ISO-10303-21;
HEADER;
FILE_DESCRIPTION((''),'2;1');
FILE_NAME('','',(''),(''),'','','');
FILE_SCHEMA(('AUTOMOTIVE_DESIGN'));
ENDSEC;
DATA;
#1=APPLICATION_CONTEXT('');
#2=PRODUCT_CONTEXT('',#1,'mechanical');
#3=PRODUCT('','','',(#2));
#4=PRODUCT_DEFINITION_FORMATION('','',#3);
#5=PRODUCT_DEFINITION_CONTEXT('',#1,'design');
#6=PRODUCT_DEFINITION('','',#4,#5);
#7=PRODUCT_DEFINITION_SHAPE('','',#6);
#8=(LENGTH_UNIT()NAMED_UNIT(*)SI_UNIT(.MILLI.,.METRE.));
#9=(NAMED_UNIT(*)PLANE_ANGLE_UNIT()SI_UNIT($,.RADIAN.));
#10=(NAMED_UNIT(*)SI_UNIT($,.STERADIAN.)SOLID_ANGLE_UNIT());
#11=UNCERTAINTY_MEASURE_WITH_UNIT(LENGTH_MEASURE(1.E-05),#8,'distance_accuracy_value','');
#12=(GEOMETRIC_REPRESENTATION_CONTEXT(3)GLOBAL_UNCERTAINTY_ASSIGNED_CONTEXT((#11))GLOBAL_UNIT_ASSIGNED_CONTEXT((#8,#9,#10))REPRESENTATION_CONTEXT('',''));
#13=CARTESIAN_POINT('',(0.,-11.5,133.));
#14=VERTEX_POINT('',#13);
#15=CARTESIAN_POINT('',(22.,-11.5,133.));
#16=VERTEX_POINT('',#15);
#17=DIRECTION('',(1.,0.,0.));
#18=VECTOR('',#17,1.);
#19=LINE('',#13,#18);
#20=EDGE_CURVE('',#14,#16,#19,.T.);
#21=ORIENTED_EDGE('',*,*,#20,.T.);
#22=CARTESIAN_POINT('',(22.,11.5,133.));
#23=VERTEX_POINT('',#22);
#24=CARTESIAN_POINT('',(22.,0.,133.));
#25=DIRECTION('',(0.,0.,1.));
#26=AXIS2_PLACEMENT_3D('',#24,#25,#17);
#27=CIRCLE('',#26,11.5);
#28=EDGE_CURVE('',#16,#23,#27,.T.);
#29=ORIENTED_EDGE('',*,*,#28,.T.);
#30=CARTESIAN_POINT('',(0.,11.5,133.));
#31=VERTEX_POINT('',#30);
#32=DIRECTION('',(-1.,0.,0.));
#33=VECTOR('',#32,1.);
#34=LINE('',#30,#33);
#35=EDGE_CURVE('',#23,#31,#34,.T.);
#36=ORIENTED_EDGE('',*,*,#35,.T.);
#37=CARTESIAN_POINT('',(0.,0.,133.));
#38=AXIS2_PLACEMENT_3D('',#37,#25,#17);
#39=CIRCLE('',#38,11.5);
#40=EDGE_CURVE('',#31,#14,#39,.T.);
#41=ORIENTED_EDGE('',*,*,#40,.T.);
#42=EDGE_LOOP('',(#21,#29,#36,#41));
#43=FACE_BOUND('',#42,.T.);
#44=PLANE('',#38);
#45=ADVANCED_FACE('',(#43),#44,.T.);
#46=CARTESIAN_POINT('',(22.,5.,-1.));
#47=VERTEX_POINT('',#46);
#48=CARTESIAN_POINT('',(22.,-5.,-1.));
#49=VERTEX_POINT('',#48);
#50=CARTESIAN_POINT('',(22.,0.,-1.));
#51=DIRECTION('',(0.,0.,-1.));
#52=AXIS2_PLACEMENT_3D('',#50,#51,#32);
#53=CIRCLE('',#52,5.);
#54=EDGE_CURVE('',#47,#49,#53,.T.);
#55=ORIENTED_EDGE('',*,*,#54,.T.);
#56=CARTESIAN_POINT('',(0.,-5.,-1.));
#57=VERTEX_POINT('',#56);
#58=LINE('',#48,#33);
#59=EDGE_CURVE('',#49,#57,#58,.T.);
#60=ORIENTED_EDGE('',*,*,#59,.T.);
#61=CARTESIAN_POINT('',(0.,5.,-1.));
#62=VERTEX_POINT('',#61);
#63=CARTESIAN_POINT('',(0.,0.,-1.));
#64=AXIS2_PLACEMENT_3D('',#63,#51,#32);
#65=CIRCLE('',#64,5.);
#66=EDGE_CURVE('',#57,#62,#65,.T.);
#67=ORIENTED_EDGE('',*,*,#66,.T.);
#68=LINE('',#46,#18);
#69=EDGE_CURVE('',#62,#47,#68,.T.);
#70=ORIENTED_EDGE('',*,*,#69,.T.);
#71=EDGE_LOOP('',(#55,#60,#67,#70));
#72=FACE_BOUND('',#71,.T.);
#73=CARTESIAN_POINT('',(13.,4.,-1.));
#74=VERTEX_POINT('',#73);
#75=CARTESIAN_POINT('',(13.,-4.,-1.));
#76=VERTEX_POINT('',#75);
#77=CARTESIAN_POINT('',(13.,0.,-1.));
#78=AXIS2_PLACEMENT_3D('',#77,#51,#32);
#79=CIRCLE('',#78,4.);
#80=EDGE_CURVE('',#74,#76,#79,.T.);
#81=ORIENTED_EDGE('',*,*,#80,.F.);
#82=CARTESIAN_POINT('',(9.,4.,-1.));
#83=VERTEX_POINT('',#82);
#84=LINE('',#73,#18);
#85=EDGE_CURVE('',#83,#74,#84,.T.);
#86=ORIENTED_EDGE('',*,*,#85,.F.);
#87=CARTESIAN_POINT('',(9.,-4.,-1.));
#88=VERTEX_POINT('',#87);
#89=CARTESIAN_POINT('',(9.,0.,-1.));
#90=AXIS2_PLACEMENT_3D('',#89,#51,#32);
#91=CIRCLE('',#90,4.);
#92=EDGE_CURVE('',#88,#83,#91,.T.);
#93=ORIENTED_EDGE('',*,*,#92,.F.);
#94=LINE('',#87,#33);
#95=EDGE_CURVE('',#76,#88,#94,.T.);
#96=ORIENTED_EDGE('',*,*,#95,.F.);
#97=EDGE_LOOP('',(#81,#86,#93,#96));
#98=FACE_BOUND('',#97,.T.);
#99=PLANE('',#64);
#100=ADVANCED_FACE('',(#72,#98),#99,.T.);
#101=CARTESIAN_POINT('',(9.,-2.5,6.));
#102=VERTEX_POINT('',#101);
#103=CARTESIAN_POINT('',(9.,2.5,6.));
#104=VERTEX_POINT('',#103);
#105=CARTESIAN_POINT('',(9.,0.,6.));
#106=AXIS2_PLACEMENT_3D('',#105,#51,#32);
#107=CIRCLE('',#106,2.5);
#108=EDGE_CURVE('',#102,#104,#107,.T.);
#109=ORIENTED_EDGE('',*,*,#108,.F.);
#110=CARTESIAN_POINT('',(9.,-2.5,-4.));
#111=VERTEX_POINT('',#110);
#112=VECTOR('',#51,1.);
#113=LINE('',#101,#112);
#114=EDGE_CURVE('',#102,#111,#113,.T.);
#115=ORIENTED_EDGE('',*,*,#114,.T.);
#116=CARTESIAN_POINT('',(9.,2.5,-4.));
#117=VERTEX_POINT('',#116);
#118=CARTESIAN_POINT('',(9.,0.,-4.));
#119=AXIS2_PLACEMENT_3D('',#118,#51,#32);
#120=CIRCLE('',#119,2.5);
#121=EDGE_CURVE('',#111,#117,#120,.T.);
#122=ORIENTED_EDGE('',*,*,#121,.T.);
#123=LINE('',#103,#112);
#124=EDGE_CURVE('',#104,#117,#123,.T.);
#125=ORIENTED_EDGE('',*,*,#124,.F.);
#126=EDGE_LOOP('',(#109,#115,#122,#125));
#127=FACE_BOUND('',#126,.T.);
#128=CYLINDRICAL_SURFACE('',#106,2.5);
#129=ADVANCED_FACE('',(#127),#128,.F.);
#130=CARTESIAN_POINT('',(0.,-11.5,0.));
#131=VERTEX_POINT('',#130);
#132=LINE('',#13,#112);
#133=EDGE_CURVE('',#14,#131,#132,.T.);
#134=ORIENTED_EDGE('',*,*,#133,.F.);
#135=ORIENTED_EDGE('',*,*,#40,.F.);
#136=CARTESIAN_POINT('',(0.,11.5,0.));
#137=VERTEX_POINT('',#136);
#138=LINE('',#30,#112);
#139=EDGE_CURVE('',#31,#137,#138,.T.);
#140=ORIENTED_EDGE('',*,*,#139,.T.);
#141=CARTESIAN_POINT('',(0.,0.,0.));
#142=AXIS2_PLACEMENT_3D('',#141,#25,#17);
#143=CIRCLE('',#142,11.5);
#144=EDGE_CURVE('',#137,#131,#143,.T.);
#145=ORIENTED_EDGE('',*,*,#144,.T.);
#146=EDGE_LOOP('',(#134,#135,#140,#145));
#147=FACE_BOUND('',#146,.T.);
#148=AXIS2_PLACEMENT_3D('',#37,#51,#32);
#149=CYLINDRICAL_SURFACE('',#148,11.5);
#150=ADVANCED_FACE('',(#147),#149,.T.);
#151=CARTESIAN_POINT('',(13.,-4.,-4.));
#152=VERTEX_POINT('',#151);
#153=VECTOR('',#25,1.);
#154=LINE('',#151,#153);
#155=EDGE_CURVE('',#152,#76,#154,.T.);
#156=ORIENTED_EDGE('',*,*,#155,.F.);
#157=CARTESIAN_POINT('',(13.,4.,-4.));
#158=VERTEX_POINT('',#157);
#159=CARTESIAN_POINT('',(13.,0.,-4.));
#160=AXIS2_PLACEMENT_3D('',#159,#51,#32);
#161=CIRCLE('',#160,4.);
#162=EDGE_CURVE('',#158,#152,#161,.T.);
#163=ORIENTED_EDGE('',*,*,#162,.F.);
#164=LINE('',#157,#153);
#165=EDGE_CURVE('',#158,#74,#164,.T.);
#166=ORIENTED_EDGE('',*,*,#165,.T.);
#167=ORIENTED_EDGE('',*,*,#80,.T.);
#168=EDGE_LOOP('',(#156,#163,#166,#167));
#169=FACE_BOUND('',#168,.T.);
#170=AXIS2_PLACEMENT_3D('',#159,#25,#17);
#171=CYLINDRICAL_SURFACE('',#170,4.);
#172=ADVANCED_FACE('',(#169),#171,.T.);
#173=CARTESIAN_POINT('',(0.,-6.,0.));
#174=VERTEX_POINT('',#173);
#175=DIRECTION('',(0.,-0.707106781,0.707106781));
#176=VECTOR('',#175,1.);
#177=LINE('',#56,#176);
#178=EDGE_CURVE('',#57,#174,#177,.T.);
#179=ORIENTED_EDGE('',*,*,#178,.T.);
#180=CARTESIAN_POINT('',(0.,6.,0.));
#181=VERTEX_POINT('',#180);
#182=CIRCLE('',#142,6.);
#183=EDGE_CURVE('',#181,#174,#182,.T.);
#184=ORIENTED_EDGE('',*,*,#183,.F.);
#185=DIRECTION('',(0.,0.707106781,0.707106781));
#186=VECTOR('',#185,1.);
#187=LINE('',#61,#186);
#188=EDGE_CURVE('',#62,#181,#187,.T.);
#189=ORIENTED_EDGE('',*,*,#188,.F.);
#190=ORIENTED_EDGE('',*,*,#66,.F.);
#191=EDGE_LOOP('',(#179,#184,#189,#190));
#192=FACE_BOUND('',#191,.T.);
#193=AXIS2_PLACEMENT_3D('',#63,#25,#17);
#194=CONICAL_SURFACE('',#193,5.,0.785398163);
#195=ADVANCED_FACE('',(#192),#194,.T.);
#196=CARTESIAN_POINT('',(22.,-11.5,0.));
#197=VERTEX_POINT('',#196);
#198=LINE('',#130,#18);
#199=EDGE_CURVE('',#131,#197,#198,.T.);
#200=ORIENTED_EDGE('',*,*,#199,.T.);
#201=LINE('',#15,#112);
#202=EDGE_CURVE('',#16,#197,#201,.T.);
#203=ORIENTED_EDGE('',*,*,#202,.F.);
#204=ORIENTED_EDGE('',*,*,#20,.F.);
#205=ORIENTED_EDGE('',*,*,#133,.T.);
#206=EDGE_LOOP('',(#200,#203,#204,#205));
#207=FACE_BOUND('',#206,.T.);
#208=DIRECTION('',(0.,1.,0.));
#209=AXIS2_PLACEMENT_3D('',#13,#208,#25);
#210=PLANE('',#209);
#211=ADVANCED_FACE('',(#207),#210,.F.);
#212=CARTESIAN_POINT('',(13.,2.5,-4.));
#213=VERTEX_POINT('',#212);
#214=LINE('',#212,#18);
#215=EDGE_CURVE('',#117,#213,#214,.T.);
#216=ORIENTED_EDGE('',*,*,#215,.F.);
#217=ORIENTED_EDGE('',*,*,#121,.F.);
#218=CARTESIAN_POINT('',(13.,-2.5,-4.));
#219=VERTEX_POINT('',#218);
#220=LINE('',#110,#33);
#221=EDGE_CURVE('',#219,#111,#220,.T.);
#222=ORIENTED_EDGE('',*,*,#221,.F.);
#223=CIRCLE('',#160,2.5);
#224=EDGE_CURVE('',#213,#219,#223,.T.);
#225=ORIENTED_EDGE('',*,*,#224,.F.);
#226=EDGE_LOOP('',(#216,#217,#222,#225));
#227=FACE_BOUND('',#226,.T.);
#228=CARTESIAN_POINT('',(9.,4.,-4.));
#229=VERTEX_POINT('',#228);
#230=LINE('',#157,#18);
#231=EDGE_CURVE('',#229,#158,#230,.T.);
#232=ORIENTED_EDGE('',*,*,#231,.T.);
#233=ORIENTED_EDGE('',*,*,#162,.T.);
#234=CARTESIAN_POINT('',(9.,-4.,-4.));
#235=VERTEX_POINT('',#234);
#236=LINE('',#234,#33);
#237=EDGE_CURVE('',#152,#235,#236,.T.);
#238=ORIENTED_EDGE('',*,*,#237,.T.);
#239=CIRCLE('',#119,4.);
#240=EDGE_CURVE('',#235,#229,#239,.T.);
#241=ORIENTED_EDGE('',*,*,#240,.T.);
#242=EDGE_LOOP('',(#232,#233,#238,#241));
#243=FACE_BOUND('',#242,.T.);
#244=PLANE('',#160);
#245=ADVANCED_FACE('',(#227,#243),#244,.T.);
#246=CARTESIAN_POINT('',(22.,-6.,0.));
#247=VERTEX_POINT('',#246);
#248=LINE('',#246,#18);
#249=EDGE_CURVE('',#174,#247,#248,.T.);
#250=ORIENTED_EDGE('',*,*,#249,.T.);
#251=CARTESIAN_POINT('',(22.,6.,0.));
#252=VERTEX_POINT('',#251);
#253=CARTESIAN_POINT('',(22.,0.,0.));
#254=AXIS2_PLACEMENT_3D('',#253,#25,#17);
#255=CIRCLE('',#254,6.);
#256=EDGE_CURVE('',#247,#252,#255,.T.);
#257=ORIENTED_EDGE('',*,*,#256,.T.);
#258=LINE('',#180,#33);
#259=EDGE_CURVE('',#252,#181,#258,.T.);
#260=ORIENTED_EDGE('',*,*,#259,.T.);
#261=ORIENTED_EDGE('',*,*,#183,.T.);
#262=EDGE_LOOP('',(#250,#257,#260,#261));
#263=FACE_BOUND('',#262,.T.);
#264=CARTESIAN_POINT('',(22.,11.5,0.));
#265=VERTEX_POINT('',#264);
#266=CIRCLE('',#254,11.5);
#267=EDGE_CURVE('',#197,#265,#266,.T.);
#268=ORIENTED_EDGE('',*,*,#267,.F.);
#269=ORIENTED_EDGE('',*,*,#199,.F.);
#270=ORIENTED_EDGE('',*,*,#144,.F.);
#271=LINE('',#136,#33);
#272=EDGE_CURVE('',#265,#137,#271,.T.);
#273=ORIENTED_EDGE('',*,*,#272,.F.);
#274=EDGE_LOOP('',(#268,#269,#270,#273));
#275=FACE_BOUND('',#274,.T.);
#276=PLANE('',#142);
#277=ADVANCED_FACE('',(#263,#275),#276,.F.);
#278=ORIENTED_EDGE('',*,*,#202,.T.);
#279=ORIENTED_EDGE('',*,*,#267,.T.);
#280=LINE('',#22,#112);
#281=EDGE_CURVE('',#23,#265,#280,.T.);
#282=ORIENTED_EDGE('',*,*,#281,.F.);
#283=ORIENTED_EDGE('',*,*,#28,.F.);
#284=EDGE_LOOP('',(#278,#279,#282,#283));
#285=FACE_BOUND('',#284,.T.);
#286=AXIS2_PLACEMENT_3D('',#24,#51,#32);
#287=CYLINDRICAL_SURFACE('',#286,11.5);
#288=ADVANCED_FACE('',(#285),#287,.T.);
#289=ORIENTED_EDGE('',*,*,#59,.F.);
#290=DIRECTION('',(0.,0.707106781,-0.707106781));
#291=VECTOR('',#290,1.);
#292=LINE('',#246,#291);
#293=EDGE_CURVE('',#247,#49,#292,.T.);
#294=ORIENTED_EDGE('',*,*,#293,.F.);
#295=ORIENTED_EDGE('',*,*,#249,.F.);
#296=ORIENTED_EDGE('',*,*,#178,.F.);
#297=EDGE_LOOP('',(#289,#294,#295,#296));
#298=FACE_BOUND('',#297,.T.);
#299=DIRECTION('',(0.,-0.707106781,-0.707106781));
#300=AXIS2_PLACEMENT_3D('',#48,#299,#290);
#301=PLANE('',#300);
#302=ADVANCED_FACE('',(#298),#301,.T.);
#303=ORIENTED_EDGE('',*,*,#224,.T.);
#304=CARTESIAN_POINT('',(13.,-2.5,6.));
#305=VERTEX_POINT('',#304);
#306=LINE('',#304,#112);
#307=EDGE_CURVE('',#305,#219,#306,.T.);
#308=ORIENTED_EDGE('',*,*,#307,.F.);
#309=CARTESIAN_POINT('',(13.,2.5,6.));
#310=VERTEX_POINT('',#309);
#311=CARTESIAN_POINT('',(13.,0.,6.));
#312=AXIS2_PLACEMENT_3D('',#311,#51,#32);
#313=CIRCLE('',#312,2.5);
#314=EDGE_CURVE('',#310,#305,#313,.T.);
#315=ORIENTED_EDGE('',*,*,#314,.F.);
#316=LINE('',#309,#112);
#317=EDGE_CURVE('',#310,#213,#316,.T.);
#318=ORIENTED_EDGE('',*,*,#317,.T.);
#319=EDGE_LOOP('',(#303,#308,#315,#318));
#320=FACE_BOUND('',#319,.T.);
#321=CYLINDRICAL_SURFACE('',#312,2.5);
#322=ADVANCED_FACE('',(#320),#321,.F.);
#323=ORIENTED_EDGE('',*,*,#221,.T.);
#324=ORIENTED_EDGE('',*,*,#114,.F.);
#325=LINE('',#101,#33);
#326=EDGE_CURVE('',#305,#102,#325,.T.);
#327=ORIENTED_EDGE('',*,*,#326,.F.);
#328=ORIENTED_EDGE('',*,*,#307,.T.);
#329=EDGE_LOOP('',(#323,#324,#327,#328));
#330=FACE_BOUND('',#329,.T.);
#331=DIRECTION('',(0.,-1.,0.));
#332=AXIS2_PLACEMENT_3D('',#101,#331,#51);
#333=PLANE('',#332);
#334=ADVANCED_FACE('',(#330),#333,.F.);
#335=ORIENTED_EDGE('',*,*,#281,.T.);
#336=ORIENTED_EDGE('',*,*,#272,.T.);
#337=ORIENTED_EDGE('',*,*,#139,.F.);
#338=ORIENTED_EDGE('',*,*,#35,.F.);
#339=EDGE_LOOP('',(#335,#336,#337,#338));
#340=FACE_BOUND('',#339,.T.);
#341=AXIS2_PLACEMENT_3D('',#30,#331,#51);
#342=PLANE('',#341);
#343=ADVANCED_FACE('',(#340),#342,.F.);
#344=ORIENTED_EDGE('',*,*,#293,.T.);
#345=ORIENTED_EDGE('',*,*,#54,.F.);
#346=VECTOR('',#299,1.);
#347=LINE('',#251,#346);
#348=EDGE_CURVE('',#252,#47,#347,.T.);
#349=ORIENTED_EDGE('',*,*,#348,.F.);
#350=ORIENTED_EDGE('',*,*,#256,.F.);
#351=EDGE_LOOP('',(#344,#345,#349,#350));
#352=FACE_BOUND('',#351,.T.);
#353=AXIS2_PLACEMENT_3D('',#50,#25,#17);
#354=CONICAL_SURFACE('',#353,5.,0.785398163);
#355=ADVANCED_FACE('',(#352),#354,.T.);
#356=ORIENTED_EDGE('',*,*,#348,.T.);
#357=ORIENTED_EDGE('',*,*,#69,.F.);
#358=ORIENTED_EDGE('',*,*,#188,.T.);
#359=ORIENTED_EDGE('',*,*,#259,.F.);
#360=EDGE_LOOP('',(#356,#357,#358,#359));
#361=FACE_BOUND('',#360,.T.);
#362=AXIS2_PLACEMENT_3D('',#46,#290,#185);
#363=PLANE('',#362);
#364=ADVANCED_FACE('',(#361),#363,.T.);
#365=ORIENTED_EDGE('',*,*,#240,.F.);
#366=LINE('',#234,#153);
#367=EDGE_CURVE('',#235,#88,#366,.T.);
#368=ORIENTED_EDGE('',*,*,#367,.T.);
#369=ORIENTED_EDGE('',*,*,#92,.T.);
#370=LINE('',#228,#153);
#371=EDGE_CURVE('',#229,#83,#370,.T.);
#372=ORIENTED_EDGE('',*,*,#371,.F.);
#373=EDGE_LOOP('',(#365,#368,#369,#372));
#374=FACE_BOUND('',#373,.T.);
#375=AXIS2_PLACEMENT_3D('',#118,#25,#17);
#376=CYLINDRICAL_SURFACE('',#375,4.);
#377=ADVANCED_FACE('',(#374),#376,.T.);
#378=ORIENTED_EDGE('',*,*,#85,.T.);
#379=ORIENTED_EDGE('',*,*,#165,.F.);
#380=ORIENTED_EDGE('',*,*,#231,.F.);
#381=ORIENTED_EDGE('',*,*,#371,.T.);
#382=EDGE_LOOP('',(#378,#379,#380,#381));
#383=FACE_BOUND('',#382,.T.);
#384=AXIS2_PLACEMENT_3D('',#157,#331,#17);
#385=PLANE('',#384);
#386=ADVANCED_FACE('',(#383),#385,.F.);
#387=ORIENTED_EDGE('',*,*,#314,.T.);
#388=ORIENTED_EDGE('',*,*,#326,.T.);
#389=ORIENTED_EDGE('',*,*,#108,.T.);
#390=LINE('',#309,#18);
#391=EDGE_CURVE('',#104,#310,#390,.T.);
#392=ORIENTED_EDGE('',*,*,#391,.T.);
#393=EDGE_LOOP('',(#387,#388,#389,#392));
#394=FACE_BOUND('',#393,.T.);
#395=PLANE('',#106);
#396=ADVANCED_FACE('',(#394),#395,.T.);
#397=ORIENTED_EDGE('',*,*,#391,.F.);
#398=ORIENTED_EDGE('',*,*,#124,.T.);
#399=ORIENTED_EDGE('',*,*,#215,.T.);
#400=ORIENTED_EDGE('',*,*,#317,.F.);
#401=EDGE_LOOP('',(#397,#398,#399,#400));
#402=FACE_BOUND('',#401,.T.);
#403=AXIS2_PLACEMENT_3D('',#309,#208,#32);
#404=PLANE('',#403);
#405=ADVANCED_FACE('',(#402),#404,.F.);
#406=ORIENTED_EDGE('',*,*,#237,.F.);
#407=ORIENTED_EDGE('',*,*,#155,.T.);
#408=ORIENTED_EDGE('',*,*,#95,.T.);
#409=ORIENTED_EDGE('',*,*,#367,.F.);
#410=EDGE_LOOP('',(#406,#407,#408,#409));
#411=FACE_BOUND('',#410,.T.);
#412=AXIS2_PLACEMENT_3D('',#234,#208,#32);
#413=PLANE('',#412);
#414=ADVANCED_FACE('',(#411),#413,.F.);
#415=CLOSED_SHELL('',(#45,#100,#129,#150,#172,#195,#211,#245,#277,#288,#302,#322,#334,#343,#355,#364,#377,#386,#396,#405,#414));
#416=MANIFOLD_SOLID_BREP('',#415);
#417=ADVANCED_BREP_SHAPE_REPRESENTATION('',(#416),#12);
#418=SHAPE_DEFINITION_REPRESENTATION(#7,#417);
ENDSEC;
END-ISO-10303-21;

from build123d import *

# Parameters (mm, degrees)
EXTRUSION1_DEPTH = 133
EXTRUSION2_DEPTH = 1
CHANFREIN1_SIZE  = 1
EXTRUSION3_DEPTH = 3
EXTRUSION4_DEPTH = 10


with BuildPart() as part:
    # Esquisse1 → Extrusion1 (new body)
    with BuildSketch(Plane.XY):
        with BuildLine():
            Line((0, 11.5), (22, 11.5))
            ThreePointArc((22, 11.5), (33.5, 0), (22, -11.5))
            Line((22, -11.5), (0, -11.5))
            ThreePointArc((0, -11.5), (-11.5, 0), (0, 11.5))
        make_face()
    extrude(amount=EXTRUSION1_DEPTH)

    # Esquisse2 → Extrusion2 (add)
    with BuildSketch(Plane(origin=(0, 0, 0), x_dir=(-1, 0, 0), z_dir=(0, 0, -1))):
        with BuildLine():
            Line((-22, 5), (0, 5))
            ThreePointArc((0, 5), (5, 0), (0, -5))
            Line((0, -5), (-22, -5))
            ThreePointArc((-22, -5), (-27, 0), (-22, 5))
        make_face()
    extrude(amount=EXTRUSION2_DEPTH)

    # Chanfrein1
    chanfrein1_edges = [part.edges().sort_by_distance(p)[0] for p in [
        (11, 5, 0),
        (-5, 0, 0),
        (27, 0, 0),
        (11, -5, 0),
    ]]
    chamfer(chanfrein1_edges, length=CHANFREIN1_SIZE - 0.0001)  # a hair under: the kernel refuses the full size

    # Esquisse3 → Extrusion3 (add)
    with BuildSketch(Plane(origin=(0, 0, -1), x_dir=(-1, 0, 0), z_dir=(0, 0, -1))):
        with BuildLine():
            Line((-13, 4), (-9, 4))
            ThreePointArc((-9, 4), (-5, 0), (-9, -4))
            Line((-9, -4), (-13, -4))
            ThreePointArc((-13, -4), (-17, 0), (-13, 4))
        make_face()
    extrude(amount=EXTRUSION3_DEPTH)

    # Esquisse4 → Extrusion4 (cut)
    with BuildSketch(Plane(origin=(0, 0, -4), x_dir=(-1, 0, 0), z_dir=(0, 0, -1))):
        with BuildLine():
            Line((-13, 2.5), (-9, 2.5))
            ThreePointArc((-9, 2.5), (-6.5, 0), (-9, -2.5))
            Line((-9, -2.5), (-13, -2.5))
            ThreePointArc((-13, -2.5), (-15.5, 0), (-13, 2.5))
        make_face()
    extrude(amount=-EXTRUSION4_DEPTH, mode=Mode.SUBTRACT)


solid = part.part
